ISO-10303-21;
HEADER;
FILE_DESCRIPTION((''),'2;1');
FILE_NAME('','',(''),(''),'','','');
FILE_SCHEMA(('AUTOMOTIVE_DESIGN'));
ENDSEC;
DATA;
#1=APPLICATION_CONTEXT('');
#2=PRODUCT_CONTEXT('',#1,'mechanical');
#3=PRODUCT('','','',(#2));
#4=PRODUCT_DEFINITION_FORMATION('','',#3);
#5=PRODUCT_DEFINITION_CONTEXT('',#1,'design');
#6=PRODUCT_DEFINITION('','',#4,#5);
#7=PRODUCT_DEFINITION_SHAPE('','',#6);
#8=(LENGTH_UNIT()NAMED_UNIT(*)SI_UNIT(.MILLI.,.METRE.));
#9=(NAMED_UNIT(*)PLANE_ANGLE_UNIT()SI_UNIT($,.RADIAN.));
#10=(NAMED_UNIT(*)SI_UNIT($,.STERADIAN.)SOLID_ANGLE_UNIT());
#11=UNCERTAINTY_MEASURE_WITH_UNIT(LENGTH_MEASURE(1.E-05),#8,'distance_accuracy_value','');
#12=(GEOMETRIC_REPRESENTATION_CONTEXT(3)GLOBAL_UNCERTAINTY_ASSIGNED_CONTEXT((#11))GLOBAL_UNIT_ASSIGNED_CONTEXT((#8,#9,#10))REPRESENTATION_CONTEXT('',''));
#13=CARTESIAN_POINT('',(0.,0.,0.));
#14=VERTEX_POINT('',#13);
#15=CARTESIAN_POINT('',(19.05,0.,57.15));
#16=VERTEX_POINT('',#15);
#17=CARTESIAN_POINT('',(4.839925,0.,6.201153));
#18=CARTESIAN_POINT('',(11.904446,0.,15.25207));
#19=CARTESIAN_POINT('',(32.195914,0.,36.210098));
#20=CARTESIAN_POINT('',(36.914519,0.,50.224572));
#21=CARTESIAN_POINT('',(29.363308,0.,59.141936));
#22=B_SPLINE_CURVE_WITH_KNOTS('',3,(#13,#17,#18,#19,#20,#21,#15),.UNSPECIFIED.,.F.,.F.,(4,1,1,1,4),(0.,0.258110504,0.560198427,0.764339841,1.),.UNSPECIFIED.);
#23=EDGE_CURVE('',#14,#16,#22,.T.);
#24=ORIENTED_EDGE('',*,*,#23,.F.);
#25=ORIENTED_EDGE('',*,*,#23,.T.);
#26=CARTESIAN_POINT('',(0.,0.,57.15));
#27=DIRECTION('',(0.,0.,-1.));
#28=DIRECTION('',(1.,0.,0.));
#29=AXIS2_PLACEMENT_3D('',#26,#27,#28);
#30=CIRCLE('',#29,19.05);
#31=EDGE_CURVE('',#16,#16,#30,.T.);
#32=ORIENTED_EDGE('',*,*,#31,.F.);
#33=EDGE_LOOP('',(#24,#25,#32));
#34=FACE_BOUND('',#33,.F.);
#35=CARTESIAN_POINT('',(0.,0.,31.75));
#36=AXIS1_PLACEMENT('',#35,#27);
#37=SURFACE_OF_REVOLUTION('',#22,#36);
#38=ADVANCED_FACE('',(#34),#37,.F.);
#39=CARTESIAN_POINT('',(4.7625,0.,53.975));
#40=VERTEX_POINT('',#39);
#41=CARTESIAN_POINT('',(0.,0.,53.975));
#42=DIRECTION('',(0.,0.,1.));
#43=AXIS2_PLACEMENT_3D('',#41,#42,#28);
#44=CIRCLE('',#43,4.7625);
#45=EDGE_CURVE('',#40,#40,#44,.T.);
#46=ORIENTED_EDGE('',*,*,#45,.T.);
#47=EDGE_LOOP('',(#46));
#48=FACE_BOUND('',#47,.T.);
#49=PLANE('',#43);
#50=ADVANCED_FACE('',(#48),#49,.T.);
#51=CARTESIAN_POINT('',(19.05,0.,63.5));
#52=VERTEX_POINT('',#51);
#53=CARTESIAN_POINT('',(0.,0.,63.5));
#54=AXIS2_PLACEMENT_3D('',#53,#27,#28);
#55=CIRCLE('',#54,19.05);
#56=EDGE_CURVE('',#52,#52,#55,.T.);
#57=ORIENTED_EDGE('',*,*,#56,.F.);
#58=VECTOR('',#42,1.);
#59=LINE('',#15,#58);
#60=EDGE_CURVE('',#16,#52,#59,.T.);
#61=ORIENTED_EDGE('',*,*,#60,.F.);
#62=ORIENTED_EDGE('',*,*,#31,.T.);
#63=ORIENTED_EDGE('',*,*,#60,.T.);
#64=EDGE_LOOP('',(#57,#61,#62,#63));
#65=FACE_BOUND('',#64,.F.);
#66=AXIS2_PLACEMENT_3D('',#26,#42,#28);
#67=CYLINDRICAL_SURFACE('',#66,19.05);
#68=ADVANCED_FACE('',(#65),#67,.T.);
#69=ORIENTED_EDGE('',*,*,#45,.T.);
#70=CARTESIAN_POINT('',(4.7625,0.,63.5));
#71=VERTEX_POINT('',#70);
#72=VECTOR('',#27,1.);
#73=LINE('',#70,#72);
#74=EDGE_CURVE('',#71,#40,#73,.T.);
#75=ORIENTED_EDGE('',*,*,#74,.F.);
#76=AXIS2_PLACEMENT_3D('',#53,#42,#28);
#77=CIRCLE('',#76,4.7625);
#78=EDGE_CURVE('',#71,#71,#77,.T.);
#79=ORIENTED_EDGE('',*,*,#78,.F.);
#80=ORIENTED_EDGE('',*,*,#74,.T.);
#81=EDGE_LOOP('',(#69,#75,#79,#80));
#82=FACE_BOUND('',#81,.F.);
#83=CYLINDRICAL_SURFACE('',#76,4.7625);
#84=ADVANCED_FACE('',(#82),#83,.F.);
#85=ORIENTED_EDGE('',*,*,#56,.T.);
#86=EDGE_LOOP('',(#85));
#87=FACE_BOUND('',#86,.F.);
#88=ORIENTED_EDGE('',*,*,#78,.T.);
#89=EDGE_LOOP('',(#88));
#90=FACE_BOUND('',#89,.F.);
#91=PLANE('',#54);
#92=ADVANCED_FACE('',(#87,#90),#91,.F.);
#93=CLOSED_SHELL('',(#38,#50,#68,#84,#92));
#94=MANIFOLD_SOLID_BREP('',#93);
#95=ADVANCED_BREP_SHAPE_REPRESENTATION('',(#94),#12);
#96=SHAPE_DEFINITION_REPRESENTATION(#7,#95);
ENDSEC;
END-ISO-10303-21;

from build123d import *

# Parameters (mm, degrees)
F2_R     = 4.7625
F3_DEPTH = 9.525


# Not quite as in the source:
# - the program builds the solid bodies; features that only make, move or delete a surface that nothing else refers to are left out


with BuildPart() as f1:
    # F0 (on Front) → F1 (revolve)
    with BuildSketch(Plane.XZ):
        with BuildLine():
            Line((19.05, 63.5), (0, 63.5))
            Line((0, 63.5), (0, 0))
            add(Edge.make_bspline(
                [(0, 0), (4.8399250954, 6.2011531554), (11.9044456396, 15.2520698758), (32.1959144321, 36.2100978246), (36.9145185343, 50.2245718319), (29.3633082779, 59.1419363718), (19.05, 57.15)],
                knots=[0, 0, 0, 0, 0.2581105042, 0.5601984274, 0.7643398405, 1, 1, 1, 1], degree=3))
            Line((19.05, 57.15), (19.05, 63.5))
        make_face()
    revolve(axis=Axis((0, 0, 31.75), (0, 0, -1)))

    # F2 (on face) → F3 (cut)
    with BuildSketch(Plane.XY.offset(63.5)):
        Circle(F2_R)
    extrude(amount=-F3_DEPTH, mode=Mode.SUBTRACT)


solid = f1.part
